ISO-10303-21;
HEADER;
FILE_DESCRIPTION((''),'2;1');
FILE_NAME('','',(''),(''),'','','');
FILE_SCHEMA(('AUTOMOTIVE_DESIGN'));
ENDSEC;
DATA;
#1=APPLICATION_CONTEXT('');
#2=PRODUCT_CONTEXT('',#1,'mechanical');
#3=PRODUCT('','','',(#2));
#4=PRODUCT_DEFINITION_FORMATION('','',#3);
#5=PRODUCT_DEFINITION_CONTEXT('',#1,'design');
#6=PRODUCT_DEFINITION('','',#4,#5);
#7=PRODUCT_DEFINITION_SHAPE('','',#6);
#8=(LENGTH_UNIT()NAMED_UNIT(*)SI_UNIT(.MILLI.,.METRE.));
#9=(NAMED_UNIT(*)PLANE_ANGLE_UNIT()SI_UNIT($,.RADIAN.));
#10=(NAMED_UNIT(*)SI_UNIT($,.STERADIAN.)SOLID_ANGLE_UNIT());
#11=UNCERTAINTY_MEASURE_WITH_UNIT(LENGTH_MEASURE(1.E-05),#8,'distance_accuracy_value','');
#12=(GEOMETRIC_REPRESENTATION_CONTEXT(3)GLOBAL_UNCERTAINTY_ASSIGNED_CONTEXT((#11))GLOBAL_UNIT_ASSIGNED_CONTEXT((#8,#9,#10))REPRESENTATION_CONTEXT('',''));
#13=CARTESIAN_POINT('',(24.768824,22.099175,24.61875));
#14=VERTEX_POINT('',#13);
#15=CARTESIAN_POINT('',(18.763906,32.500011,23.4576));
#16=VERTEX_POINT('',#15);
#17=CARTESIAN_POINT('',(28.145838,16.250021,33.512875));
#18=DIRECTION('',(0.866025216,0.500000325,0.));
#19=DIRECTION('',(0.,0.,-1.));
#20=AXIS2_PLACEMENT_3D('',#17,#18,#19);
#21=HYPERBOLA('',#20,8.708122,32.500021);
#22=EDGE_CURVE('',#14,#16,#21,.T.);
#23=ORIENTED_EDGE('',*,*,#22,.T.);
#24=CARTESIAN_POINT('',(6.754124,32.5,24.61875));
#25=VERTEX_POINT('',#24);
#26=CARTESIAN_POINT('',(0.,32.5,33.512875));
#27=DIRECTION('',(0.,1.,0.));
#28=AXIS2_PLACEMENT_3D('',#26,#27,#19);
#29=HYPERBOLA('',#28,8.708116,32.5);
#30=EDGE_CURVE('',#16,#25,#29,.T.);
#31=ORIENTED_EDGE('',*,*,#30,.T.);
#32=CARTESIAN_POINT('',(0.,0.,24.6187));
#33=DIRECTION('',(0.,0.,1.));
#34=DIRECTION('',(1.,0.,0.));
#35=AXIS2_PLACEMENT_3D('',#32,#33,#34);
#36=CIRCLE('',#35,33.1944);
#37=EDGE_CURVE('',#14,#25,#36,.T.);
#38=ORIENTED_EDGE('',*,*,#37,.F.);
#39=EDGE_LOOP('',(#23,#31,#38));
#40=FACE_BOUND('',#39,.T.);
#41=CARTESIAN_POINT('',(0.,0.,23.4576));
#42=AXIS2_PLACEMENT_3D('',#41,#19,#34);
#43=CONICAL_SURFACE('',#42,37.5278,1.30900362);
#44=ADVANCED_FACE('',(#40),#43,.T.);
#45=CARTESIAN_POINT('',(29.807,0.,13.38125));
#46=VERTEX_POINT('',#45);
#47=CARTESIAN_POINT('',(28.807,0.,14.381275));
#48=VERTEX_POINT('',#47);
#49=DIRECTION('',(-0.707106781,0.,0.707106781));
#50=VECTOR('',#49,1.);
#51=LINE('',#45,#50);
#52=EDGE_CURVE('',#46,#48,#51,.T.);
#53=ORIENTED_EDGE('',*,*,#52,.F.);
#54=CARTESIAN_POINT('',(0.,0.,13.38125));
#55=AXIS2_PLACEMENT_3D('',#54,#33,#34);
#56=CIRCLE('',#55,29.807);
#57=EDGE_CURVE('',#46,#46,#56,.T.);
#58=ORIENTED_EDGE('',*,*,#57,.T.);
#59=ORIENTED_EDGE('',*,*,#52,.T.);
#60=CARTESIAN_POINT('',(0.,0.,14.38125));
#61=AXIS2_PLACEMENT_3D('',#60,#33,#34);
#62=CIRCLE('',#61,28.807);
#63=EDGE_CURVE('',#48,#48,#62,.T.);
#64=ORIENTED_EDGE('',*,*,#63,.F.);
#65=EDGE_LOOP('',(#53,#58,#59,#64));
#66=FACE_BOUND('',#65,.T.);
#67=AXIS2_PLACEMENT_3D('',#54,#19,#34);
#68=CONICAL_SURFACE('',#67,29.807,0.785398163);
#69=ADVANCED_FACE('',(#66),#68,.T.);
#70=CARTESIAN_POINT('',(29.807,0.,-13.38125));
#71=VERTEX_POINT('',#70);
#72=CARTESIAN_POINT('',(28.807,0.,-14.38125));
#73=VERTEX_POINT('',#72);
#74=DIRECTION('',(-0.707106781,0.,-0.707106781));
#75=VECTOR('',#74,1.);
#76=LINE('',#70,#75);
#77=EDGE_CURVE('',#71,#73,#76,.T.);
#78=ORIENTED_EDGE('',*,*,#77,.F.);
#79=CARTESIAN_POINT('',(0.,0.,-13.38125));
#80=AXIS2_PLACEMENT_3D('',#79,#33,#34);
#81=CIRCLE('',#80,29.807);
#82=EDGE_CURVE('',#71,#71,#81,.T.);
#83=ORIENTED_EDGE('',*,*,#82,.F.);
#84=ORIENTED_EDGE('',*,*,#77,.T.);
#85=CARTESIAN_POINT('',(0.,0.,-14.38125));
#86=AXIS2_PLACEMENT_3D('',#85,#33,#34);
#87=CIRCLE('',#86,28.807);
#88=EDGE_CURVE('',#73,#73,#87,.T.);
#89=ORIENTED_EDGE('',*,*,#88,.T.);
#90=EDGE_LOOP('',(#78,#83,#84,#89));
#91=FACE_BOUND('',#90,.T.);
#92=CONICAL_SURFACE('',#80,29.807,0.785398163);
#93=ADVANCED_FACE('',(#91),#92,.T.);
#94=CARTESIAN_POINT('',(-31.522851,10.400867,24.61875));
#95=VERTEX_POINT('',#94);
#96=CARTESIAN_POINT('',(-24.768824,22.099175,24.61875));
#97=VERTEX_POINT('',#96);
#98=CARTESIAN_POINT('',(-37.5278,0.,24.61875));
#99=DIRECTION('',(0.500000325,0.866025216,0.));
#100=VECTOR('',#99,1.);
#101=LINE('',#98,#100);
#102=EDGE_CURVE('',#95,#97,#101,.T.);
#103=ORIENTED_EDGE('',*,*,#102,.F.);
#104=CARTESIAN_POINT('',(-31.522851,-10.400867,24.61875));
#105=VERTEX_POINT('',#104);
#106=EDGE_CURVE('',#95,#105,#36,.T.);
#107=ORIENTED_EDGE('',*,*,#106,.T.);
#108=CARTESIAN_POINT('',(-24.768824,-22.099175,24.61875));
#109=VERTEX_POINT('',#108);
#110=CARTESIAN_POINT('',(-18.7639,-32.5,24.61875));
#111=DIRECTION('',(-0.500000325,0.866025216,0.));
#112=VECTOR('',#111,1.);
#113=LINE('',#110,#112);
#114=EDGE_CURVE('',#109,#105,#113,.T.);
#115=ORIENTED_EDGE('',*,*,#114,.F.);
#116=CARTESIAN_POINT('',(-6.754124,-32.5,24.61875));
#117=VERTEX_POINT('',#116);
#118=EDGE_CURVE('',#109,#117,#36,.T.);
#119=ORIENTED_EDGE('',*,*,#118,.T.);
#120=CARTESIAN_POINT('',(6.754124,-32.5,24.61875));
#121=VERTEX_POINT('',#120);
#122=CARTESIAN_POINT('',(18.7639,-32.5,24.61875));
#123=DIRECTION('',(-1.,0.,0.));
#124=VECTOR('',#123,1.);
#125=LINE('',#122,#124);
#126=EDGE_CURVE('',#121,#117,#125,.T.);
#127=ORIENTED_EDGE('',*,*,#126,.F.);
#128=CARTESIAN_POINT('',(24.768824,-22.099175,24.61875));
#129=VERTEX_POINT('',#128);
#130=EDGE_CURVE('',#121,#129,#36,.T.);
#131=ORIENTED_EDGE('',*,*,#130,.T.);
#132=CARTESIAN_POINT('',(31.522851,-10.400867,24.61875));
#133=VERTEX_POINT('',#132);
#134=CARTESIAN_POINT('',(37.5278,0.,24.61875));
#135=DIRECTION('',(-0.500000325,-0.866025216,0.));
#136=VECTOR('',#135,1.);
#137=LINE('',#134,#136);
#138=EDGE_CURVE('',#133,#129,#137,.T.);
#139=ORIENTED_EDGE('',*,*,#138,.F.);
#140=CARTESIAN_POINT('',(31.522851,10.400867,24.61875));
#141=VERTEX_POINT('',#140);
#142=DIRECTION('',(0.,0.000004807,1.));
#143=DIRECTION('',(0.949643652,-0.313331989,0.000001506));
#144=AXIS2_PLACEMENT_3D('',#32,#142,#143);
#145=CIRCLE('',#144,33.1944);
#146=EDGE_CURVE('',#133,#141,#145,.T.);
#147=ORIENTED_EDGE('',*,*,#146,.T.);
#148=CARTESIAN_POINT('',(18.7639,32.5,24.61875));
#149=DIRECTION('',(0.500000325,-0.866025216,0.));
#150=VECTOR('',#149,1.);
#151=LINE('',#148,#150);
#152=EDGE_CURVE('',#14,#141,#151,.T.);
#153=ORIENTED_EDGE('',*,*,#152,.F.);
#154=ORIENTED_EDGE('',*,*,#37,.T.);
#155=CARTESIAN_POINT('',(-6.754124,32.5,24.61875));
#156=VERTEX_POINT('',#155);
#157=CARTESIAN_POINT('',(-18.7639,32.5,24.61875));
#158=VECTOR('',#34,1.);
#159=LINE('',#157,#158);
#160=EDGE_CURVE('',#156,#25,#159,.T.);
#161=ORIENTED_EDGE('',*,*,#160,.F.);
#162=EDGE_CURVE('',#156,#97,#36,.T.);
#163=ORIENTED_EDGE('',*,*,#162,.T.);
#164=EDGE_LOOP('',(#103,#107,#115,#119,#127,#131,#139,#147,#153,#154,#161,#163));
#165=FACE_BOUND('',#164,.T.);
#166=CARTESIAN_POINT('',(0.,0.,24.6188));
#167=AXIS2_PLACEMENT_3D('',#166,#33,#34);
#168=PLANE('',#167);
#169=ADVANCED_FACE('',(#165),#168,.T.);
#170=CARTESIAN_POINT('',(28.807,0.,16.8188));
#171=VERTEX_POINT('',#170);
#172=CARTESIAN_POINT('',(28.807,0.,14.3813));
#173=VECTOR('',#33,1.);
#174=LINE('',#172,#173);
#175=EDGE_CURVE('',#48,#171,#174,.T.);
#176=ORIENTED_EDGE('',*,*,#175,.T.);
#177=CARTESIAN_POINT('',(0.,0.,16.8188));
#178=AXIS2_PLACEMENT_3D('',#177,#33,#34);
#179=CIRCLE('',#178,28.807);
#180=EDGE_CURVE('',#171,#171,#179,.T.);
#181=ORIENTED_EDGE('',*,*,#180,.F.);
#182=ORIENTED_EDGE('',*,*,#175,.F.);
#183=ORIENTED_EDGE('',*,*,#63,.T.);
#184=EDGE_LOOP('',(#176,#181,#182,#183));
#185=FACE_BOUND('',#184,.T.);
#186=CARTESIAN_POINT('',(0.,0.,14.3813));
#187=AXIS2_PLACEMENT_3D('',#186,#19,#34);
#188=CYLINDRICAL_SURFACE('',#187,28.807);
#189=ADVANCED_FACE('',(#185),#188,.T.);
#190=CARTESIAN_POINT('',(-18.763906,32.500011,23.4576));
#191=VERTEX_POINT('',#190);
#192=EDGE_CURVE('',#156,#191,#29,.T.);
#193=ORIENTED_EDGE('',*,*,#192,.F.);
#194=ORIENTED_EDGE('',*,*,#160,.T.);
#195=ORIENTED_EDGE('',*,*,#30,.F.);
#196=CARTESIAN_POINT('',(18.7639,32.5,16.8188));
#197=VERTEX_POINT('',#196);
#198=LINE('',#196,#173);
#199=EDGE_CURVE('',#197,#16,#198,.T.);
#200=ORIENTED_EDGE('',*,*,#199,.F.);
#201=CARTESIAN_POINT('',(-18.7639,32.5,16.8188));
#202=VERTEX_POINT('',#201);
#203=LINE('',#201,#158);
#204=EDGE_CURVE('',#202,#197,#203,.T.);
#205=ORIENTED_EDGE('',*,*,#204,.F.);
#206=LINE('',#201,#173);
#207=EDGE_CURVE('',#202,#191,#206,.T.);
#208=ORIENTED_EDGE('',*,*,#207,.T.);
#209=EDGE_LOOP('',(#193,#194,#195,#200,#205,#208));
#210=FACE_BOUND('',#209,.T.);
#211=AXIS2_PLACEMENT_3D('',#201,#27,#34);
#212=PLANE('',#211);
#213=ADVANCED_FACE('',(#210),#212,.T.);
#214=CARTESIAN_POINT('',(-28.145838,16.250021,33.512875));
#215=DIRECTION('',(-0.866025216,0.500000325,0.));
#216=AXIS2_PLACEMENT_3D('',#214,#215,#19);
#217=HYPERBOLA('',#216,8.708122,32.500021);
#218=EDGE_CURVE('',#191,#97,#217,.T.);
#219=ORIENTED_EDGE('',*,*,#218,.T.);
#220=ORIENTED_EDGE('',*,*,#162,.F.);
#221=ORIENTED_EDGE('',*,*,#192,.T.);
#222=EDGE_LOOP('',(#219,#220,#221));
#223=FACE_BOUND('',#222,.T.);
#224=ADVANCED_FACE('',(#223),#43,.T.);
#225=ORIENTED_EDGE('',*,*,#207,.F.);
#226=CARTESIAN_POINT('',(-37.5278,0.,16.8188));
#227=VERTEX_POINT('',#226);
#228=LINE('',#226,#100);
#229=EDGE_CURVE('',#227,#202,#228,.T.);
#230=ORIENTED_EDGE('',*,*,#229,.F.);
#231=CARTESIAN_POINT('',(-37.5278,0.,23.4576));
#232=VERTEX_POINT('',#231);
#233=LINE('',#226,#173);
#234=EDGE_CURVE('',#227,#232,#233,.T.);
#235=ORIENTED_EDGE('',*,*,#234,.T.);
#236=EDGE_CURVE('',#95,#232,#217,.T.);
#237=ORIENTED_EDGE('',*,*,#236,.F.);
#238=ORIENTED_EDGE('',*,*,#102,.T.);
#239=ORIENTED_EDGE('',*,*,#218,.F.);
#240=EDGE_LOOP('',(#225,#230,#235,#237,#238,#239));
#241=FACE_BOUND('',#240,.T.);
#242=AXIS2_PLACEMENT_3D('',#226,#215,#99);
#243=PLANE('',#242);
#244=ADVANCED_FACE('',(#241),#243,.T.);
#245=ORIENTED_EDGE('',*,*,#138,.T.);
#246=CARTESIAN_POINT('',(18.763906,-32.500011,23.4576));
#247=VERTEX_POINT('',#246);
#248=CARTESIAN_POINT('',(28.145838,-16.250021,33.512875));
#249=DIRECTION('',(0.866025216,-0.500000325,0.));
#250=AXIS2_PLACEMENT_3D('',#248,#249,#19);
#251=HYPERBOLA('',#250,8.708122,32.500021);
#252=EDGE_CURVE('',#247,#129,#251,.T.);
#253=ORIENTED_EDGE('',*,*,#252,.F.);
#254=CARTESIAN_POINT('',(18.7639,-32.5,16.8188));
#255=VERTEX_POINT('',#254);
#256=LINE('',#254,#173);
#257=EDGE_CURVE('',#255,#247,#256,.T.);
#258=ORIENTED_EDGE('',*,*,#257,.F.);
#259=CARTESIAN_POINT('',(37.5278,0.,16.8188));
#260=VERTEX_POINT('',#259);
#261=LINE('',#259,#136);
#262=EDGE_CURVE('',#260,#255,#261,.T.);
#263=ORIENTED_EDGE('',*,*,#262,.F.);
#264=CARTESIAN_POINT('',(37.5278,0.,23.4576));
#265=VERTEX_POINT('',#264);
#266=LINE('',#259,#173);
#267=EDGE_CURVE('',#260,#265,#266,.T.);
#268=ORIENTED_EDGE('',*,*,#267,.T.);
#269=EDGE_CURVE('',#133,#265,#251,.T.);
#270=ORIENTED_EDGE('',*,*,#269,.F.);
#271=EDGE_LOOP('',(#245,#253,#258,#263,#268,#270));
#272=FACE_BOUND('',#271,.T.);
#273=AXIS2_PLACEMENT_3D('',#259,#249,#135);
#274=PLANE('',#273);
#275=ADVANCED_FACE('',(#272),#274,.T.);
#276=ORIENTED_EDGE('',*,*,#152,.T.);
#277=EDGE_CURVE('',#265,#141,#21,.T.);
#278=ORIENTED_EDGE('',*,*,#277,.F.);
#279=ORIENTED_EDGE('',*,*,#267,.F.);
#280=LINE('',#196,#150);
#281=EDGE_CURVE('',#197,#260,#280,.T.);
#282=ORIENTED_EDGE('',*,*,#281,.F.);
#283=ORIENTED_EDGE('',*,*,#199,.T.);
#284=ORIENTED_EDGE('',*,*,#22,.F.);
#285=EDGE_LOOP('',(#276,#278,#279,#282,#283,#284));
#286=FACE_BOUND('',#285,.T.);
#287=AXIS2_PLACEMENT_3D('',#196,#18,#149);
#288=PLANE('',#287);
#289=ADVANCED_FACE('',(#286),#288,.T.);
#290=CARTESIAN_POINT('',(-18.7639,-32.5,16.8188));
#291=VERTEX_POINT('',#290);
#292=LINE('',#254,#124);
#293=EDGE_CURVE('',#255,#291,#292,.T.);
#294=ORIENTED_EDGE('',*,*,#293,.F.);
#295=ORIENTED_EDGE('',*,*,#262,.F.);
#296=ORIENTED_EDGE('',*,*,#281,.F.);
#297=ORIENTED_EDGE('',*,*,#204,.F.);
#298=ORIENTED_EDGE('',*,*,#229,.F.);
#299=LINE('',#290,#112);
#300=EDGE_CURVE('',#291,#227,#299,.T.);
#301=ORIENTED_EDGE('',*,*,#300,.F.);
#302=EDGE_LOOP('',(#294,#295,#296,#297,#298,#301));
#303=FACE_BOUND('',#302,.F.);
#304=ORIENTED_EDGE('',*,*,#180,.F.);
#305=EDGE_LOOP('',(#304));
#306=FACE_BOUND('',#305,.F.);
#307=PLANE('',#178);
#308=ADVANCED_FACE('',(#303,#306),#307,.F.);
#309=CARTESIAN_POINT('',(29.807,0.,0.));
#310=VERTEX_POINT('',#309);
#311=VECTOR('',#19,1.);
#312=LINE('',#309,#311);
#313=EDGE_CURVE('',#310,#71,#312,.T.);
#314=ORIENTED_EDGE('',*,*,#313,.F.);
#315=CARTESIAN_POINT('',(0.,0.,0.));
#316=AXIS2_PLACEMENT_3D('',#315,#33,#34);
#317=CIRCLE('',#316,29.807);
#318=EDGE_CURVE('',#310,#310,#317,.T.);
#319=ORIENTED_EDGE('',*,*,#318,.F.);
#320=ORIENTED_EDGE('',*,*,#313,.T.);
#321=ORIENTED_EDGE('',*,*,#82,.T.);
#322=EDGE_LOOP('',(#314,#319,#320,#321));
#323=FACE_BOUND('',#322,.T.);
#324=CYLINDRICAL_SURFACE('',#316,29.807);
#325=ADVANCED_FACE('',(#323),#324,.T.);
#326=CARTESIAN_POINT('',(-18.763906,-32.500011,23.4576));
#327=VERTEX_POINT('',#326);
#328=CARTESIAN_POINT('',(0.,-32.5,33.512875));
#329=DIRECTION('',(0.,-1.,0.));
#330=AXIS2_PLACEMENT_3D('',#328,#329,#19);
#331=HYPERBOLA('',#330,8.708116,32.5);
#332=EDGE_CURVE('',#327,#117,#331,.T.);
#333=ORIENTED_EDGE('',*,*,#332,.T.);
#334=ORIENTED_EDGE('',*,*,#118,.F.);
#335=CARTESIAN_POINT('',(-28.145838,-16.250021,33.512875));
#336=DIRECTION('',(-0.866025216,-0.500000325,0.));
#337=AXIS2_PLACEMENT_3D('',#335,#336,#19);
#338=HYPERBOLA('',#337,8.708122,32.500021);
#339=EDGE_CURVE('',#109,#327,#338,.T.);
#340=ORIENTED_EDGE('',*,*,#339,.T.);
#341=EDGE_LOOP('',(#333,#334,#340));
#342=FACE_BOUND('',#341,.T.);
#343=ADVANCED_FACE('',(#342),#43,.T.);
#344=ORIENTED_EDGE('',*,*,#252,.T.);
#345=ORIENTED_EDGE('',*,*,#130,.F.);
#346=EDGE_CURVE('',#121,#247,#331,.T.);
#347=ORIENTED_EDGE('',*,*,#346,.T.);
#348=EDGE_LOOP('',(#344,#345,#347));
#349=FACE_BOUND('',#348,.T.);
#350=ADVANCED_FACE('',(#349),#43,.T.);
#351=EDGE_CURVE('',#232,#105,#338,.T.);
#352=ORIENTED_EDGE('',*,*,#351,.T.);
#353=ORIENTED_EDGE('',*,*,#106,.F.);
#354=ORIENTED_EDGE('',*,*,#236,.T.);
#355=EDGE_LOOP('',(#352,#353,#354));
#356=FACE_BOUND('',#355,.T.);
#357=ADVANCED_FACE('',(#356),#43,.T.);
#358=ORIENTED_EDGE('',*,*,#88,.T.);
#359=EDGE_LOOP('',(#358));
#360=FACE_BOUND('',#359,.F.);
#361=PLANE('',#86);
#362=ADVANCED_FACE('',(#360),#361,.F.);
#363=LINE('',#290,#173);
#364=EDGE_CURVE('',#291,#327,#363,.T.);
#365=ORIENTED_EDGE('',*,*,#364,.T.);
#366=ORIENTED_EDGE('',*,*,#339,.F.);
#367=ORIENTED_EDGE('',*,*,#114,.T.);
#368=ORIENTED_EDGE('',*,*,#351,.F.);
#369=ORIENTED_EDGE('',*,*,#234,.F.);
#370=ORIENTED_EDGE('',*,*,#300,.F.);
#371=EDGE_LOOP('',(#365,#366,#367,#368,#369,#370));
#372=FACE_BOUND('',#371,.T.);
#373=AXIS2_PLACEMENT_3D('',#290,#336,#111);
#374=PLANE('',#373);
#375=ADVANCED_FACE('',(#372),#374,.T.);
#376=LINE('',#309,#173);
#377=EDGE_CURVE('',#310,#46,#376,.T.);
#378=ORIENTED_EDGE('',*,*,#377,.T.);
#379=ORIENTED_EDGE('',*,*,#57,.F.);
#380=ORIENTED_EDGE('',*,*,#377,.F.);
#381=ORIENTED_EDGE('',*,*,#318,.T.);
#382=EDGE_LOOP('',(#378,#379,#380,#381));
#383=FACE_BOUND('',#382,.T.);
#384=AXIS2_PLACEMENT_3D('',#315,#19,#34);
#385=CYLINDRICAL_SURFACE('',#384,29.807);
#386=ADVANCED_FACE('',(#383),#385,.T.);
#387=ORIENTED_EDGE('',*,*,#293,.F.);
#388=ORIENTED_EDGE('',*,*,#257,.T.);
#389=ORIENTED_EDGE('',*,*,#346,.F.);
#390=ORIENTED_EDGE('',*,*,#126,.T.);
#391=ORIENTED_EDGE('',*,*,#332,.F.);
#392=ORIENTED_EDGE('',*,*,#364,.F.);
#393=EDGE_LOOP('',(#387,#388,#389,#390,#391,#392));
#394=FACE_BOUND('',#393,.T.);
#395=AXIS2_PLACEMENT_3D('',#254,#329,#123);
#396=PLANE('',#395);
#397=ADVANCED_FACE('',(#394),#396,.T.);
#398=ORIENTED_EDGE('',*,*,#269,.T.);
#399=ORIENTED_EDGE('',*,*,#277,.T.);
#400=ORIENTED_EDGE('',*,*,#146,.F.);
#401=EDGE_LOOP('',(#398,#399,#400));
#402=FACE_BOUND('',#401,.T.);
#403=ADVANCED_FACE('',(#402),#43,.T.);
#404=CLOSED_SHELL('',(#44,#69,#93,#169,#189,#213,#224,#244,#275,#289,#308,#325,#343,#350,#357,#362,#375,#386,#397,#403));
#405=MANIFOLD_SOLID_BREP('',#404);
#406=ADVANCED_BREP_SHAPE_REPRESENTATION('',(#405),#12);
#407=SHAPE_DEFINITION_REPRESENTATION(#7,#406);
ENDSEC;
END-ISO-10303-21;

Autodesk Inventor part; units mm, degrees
ref_plane "YZ Plane" through (0, 0, 0) normal (1, 0, 0) x (0, 1, 0)
ref_plane "XZ Plane" through (0, 0, 0) normal (0, 1, 0) x (-1, 0, 0)
ref_plane "XY Plane" through (0, 0, 0) normal (0, 0, 1) x (1, 0, 0)
sketch "Szkic7" plane through (0, 0, 0) normal (0, 0, 1) x (1, 0, 0)
  circle A0 centre (0, 0) radius 29.807
  dimension "d35" = 59.614
extrude "Wyciągnięcie proste2" add sketch "Szkic7" along normal mid plane 28.7625
chamfer "Faza2" distance 1 angle 45 1 edges at (-29.807, 0, 14.3813)
sketch "Szkic9" plane through (0, 0, 14.3813) normal (0, 0, 1) x (1, 0, 0)
  circle A0 centre (0, 0) radius 28.807 projected
extrude "Wyciągnięcie proste3" add sketch "Szkic9" along normal blind 2.4375
sketch "Szkic10" plane through (0, 0, 16.8188) normal (0, 0, 1) x (1, 0, 0)
  line L0 (-18.7639, 32.5) -> (18.7639, 32.5)
  line L1 (18.7639, 32.5) -> (37.5278, 0)
  line L2 (37.5278, 0) -> (18.7639, -32.5)
  line L3 (18.7639, -32.5) -> (-18.7639, -32.5)
  line L4 (-18.7639, -32.5) -> (-37.5278, 0)
  line L5 (-37.5278, 0) -> (-18.7639, 32.5)
  line L6 (0, 41.7298) -> (0, -41.7298) construction
  line L7 (-41.7298, 0) -> (41.7298, 0) construction
  point P0 (0, 0)
  point P1 (0, 0)
  point P2 (0, 32.5)
  dimension "d44" = 65
extrude "Wyciągnięcie proste4" add sketch "Szkic10" along normal blind 7.8
sketch "Szkic12" plane through (0, 0, 0) normal (0, 1, 0) x (-1, 0, 0)
  line L0 (0, -2.1463) -> (0, 12.8775) construction
  line L1 (-18.7639, 16.8188) -> (-18.7639, 24.6187) construction
  line L2 (-37.5278, 24.6187) -> (-18.7639, 24.6187) construction
  line L3 (-37.5278, 16.8188) -> (-37.5278, 24.6187) projected
  line L4 (-37.5278, 23.4576) -> (-33.1944, 24.6187)
  line L5 (-37.5278, 24.6187) -> (-18.7639, 24.6187) projected
  line L6 (-37.5278, 16.8188) -> (-18.7639, 16.8188) projected
  point P0 (0, 0)
  dimension "d50" = 15
  dimension "d51" = 4.3333
revolve "Obrót2" cut sketch "Szkic12" angle 360 about axis through (0, 0, -10) along (0, 0, 1)
thread "Gwint3" size "G59.614x2.309" designation "G 2" class "A" standard "ISO Pipe Threads" full length
chamfer "Faza3" distance 1 angle 45 1 edges at (-29.807, 0, -14.3813)
equation "\"d35\" = OD"
equation "\"d36\" = 0.7375 * L"
equation "\"d42\" = 0.0625 * L"
equation "\"d44\" = SW"
equation "\"d45\" = 0.2 * L"
equation "\"d51\" = 0.0666667 * SW"
equation "\"SzerokośćGięciaPodcięcia\" = Grubość"
equation "\"RozmiarPodcięciaNarożnika\" = 4 * Grubość"
equation "\"PromieńPrzejścia\" = PromieńGięcia"
equation "\"Rozmiar_promienia_Jacobiego\" = PromieńGięcia"
equation "\"Wielk_odstępu\" = Grubość"
equation "\"d2\" = PromieńGięcia"
equation "\"d23\" = PromieńGięcia"
equation "\"OD\" = 59.614"
equation "\"SW\" = 65"
equation "\"L\" = 39"
equation "\"Grubość\" = 1.5"
equation "\"PromieńGięcia\" = 3"
properties part number "Korek sześciokątny BSP 2'' L=39" material "304"
